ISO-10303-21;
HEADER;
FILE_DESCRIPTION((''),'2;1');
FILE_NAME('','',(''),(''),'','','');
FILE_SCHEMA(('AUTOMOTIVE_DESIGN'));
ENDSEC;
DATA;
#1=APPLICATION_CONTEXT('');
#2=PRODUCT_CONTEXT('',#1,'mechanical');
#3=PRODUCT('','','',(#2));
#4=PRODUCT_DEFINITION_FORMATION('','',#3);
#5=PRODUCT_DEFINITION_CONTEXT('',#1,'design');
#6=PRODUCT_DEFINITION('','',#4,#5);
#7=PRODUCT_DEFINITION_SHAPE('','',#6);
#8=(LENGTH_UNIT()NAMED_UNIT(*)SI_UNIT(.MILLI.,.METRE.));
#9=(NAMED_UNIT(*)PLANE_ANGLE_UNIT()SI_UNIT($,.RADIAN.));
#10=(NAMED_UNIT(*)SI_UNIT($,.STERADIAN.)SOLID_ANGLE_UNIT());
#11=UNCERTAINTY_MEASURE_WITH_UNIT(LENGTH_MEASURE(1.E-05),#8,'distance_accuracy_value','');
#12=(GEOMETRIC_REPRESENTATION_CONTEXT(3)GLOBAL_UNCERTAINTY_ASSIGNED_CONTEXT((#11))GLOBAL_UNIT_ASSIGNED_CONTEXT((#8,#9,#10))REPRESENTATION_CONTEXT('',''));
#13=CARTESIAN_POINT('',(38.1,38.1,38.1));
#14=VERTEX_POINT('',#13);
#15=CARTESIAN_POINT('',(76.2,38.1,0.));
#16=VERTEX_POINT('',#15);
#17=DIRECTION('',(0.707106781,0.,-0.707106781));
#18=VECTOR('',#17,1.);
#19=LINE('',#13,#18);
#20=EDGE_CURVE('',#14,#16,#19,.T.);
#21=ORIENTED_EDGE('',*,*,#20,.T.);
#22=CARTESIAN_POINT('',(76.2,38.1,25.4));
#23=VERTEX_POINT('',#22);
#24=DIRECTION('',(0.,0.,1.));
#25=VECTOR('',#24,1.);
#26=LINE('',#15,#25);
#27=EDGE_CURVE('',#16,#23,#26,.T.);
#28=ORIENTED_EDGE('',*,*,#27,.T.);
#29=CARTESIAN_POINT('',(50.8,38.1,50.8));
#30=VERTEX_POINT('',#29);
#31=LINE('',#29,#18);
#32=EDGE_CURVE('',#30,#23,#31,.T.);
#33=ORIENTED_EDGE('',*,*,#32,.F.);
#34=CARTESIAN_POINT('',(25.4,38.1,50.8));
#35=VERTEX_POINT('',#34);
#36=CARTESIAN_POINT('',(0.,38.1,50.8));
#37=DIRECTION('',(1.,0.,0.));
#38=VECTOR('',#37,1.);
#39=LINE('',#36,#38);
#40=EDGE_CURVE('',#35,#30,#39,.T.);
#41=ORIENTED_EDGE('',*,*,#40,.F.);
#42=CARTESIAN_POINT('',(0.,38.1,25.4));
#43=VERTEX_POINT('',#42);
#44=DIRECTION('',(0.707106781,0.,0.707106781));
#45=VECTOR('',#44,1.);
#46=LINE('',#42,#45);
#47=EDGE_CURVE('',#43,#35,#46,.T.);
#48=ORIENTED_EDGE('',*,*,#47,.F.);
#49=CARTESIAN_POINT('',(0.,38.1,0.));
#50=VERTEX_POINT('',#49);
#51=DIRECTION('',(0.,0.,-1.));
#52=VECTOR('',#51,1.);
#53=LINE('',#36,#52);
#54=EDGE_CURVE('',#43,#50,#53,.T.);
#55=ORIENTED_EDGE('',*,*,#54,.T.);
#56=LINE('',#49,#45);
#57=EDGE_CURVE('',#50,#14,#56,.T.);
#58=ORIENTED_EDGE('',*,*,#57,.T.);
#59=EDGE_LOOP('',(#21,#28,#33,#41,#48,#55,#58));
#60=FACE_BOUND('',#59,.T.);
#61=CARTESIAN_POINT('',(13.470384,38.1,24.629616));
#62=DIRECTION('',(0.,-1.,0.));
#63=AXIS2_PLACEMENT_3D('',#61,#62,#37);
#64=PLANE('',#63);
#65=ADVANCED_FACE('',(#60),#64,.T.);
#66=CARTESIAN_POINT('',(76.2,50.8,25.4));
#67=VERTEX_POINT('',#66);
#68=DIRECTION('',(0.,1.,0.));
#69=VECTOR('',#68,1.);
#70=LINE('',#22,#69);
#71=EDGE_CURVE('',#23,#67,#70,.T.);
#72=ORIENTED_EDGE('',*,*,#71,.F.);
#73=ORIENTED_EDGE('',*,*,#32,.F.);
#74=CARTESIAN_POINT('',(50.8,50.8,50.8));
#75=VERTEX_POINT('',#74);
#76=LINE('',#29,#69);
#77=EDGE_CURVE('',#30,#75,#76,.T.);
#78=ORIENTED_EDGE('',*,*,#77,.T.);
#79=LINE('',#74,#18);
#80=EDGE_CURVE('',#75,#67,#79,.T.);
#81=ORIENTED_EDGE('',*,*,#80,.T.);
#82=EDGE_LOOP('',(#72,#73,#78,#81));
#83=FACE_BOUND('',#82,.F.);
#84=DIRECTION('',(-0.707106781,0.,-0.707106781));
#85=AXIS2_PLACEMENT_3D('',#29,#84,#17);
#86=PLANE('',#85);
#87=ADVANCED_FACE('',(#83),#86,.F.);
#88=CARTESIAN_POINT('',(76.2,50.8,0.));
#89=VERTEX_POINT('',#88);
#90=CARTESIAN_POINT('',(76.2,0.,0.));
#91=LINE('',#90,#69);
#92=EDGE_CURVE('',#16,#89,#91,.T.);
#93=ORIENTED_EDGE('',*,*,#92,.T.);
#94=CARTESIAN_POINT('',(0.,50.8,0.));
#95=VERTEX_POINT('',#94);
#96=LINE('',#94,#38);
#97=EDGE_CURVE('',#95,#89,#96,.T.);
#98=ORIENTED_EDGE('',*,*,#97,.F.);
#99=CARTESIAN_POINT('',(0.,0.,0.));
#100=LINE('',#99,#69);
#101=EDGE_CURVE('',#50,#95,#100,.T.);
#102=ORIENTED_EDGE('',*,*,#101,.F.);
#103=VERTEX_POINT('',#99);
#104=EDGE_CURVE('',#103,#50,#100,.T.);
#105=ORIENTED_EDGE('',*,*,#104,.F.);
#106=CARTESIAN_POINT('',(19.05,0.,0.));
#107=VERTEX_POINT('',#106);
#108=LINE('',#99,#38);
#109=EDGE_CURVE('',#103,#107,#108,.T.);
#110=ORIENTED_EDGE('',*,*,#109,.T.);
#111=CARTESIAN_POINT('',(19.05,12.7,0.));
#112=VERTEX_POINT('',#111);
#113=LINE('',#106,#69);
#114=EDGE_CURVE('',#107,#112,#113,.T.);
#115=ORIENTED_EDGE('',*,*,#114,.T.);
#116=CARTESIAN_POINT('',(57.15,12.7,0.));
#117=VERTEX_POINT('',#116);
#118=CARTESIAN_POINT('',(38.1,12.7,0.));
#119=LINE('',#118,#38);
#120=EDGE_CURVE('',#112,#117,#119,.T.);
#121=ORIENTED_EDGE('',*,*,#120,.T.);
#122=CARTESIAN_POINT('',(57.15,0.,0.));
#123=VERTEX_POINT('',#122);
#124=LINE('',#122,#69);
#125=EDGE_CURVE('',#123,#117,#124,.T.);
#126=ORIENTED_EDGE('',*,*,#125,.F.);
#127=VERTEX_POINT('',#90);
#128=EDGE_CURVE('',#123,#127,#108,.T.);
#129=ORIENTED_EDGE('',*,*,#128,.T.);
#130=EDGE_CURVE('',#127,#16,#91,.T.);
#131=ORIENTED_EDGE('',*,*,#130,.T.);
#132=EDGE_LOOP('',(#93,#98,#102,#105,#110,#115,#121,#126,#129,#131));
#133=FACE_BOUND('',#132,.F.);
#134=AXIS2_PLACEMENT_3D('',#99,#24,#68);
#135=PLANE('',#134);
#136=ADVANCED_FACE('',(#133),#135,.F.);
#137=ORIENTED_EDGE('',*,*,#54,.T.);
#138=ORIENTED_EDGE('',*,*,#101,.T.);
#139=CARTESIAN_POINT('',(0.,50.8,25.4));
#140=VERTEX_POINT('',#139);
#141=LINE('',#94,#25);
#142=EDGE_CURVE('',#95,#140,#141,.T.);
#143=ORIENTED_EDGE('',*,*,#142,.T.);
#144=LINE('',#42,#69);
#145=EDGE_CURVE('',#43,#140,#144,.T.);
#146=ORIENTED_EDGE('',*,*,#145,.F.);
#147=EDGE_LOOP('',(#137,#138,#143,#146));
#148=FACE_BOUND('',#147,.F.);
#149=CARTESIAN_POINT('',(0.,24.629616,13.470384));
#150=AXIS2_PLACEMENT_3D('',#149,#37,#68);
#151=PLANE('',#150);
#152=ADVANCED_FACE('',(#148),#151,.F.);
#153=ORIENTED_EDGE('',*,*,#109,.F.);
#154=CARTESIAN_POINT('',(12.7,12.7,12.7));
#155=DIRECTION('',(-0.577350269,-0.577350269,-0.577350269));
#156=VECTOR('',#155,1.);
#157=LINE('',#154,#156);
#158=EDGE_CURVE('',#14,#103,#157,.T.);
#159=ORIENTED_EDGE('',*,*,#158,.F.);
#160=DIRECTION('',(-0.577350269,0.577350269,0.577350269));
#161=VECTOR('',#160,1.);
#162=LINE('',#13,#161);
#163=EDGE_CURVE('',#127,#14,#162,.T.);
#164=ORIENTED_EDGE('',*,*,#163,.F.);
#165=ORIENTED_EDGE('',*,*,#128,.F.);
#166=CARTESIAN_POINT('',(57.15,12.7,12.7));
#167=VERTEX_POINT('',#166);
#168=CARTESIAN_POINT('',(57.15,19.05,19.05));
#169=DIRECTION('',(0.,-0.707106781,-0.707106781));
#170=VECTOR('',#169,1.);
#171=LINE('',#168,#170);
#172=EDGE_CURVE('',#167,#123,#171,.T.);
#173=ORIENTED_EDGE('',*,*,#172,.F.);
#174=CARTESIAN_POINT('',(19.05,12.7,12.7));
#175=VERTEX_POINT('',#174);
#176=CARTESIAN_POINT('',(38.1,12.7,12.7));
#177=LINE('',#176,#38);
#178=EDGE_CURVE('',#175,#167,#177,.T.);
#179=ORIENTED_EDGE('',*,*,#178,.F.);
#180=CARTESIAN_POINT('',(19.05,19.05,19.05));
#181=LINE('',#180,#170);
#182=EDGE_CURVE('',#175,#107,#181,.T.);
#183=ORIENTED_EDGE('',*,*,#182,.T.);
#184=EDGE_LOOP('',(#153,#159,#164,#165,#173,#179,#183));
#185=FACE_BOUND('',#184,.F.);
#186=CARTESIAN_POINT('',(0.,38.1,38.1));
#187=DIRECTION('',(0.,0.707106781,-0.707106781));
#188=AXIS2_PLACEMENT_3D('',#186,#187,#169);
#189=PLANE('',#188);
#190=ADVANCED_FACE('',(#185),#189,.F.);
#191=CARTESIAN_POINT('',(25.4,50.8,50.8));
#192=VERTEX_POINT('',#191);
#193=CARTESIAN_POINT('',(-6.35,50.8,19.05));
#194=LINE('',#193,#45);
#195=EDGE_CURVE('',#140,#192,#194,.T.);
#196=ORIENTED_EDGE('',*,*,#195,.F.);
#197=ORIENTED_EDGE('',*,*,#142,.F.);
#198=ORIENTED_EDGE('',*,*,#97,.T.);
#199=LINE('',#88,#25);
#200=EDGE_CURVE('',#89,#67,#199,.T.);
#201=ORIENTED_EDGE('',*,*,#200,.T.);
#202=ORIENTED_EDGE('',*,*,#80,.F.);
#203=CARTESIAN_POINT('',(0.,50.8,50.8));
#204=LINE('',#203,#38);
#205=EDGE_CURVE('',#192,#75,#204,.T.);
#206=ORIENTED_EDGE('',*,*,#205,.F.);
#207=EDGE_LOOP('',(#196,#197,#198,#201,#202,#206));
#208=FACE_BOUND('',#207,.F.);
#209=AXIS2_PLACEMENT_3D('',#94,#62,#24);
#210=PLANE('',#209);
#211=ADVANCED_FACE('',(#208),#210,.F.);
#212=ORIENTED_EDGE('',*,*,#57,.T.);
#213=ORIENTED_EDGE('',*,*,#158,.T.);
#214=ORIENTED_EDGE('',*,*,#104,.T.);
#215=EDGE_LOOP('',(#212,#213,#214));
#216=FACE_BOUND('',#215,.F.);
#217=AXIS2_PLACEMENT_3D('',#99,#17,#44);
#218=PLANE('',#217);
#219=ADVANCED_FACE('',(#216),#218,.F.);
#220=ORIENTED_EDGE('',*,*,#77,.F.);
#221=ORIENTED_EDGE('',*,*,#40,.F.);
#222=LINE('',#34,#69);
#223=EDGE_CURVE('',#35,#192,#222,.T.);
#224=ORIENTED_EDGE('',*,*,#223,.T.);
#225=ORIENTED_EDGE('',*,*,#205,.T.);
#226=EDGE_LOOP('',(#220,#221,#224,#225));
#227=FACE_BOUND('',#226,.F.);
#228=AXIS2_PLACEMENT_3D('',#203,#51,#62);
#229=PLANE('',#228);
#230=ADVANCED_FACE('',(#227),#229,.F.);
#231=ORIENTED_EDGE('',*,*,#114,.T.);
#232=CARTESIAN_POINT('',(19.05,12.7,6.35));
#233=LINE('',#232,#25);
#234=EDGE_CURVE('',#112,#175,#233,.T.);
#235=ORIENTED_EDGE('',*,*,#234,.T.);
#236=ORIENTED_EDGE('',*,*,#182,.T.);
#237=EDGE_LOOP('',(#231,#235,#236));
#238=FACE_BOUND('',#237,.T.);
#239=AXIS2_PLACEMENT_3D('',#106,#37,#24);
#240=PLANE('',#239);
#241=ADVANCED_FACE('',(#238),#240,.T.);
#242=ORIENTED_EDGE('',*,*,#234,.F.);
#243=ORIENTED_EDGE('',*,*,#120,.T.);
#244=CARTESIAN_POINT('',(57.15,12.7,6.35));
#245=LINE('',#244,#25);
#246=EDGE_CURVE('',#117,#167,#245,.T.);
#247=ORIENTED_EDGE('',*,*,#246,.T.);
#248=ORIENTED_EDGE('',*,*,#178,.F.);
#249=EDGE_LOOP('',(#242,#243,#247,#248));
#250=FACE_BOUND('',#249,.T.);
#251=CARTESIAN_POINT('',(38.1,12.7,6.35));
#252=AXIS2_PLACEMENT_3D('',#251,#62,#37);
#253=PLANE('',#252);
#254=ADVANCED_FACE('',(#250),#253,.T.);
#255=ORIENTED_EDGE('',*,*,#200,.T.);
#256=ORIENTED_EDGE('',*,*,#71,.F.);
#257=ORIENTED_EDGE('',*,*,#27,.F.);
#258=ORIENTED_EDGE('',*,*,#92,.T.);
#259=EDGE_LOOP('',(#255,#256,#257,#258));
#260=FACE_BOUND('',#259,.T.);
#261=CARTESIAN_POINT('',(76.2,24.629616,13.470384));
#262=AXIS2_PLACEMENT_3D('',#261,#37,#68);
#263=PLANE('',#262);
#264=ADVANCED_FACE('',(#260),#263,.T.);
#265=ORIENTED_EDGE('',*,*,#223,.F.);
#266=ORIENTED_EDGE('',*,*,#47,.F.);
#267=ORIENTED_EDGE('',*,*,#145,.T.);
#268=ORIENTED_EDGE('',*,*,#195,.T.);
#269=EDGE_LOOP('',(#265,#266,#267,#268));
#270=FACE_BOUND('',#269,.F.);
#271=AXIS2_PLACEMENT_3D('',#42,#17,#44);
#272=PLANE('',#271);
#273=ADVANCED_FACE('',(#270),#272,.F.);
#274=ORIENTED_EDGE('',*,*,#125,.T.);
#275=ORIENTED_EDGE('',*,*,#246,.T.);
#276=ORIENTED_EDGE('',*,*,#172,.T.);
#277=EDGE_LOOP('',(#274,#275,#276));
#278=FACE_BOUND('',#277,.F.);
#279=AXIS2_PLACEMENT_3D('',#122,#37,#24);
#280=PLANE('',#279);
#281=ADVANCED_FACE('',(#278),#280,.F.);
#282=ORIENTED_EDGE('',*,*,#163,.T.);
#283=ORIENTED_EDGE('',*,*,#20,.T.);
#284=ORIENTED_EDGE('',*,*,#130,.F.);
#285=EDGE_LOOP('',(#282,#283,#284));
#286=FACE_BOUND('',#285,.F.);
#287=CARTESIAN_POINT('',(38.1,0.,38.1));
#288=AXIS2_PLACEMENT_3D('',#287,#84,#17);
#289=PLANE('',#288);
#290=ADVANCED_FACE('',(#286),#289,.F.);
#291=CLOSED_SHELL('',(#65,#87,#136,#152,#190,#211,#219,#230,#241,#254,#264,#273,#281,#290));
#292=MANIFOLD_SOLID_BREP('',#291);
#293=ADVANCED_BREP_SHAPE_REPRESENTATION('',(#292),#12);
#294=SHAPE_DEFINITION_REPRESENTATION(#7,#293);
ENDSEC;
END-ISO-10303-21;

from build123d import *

# Parameters (mm, degrees)
F1_DEPTH = 76.2
F3_DEPTH = 38.1
F5_DEPTH = 12.701
F6_W     = 38.1
F6_H     = 12.7
F7_DEPTH = 12.7


with BuildPart() as f1:
    # F0 (on Right) → F1 (new body)
    with BuildSketch(Plane.YZ):
        Polygon((38.1, 38.1), (0, 0), (38.1, 0), align=None)
        Polygon((38.1, 38.1), (38.1, 0), (50.8, 0), (50.8, 50.8), (38.1, 50.8), align=None)
    extrude(amount=F1_DEPTH)

    # F2 (on Front) → F3 (cut, through all)
    with BuildSketch(Plane.XZ):
        Polygon((76.2, 38.1), (38.1, 38.1), (76.2, 0), align=None)
        Polygon((0, 38.1), (0, 0), (38.1, 38.1), align=None)
    extrude(amount=-F3_DEPTH, mode=Mode.SUBTRACT)

    # F4 (on face) → F5 (cut, through all)
    with BuildSketch(Plane.XZ.offset(-38.1)):
        Polygon((25.4, 50.8), (0, 50.8), (0, 25.4), align=None)
        Polygon((76.2, 50.8), (50.8, 50.8), (76.2, 25.4), align=None)
    extrude(amount=-F5_DEPTH, mode=Mode.SUBTRACT)

    # F6 (on Front) → F7 (cut)
    with BuildSketch(Plane.XZ):
        with Locations((38.1, 6.35)):
            Rectangle(F6_W, F6_H)
    extrude(amount=-F7_DEPTH, mode=Mode.SUBTRACT)


solid = f1.part
